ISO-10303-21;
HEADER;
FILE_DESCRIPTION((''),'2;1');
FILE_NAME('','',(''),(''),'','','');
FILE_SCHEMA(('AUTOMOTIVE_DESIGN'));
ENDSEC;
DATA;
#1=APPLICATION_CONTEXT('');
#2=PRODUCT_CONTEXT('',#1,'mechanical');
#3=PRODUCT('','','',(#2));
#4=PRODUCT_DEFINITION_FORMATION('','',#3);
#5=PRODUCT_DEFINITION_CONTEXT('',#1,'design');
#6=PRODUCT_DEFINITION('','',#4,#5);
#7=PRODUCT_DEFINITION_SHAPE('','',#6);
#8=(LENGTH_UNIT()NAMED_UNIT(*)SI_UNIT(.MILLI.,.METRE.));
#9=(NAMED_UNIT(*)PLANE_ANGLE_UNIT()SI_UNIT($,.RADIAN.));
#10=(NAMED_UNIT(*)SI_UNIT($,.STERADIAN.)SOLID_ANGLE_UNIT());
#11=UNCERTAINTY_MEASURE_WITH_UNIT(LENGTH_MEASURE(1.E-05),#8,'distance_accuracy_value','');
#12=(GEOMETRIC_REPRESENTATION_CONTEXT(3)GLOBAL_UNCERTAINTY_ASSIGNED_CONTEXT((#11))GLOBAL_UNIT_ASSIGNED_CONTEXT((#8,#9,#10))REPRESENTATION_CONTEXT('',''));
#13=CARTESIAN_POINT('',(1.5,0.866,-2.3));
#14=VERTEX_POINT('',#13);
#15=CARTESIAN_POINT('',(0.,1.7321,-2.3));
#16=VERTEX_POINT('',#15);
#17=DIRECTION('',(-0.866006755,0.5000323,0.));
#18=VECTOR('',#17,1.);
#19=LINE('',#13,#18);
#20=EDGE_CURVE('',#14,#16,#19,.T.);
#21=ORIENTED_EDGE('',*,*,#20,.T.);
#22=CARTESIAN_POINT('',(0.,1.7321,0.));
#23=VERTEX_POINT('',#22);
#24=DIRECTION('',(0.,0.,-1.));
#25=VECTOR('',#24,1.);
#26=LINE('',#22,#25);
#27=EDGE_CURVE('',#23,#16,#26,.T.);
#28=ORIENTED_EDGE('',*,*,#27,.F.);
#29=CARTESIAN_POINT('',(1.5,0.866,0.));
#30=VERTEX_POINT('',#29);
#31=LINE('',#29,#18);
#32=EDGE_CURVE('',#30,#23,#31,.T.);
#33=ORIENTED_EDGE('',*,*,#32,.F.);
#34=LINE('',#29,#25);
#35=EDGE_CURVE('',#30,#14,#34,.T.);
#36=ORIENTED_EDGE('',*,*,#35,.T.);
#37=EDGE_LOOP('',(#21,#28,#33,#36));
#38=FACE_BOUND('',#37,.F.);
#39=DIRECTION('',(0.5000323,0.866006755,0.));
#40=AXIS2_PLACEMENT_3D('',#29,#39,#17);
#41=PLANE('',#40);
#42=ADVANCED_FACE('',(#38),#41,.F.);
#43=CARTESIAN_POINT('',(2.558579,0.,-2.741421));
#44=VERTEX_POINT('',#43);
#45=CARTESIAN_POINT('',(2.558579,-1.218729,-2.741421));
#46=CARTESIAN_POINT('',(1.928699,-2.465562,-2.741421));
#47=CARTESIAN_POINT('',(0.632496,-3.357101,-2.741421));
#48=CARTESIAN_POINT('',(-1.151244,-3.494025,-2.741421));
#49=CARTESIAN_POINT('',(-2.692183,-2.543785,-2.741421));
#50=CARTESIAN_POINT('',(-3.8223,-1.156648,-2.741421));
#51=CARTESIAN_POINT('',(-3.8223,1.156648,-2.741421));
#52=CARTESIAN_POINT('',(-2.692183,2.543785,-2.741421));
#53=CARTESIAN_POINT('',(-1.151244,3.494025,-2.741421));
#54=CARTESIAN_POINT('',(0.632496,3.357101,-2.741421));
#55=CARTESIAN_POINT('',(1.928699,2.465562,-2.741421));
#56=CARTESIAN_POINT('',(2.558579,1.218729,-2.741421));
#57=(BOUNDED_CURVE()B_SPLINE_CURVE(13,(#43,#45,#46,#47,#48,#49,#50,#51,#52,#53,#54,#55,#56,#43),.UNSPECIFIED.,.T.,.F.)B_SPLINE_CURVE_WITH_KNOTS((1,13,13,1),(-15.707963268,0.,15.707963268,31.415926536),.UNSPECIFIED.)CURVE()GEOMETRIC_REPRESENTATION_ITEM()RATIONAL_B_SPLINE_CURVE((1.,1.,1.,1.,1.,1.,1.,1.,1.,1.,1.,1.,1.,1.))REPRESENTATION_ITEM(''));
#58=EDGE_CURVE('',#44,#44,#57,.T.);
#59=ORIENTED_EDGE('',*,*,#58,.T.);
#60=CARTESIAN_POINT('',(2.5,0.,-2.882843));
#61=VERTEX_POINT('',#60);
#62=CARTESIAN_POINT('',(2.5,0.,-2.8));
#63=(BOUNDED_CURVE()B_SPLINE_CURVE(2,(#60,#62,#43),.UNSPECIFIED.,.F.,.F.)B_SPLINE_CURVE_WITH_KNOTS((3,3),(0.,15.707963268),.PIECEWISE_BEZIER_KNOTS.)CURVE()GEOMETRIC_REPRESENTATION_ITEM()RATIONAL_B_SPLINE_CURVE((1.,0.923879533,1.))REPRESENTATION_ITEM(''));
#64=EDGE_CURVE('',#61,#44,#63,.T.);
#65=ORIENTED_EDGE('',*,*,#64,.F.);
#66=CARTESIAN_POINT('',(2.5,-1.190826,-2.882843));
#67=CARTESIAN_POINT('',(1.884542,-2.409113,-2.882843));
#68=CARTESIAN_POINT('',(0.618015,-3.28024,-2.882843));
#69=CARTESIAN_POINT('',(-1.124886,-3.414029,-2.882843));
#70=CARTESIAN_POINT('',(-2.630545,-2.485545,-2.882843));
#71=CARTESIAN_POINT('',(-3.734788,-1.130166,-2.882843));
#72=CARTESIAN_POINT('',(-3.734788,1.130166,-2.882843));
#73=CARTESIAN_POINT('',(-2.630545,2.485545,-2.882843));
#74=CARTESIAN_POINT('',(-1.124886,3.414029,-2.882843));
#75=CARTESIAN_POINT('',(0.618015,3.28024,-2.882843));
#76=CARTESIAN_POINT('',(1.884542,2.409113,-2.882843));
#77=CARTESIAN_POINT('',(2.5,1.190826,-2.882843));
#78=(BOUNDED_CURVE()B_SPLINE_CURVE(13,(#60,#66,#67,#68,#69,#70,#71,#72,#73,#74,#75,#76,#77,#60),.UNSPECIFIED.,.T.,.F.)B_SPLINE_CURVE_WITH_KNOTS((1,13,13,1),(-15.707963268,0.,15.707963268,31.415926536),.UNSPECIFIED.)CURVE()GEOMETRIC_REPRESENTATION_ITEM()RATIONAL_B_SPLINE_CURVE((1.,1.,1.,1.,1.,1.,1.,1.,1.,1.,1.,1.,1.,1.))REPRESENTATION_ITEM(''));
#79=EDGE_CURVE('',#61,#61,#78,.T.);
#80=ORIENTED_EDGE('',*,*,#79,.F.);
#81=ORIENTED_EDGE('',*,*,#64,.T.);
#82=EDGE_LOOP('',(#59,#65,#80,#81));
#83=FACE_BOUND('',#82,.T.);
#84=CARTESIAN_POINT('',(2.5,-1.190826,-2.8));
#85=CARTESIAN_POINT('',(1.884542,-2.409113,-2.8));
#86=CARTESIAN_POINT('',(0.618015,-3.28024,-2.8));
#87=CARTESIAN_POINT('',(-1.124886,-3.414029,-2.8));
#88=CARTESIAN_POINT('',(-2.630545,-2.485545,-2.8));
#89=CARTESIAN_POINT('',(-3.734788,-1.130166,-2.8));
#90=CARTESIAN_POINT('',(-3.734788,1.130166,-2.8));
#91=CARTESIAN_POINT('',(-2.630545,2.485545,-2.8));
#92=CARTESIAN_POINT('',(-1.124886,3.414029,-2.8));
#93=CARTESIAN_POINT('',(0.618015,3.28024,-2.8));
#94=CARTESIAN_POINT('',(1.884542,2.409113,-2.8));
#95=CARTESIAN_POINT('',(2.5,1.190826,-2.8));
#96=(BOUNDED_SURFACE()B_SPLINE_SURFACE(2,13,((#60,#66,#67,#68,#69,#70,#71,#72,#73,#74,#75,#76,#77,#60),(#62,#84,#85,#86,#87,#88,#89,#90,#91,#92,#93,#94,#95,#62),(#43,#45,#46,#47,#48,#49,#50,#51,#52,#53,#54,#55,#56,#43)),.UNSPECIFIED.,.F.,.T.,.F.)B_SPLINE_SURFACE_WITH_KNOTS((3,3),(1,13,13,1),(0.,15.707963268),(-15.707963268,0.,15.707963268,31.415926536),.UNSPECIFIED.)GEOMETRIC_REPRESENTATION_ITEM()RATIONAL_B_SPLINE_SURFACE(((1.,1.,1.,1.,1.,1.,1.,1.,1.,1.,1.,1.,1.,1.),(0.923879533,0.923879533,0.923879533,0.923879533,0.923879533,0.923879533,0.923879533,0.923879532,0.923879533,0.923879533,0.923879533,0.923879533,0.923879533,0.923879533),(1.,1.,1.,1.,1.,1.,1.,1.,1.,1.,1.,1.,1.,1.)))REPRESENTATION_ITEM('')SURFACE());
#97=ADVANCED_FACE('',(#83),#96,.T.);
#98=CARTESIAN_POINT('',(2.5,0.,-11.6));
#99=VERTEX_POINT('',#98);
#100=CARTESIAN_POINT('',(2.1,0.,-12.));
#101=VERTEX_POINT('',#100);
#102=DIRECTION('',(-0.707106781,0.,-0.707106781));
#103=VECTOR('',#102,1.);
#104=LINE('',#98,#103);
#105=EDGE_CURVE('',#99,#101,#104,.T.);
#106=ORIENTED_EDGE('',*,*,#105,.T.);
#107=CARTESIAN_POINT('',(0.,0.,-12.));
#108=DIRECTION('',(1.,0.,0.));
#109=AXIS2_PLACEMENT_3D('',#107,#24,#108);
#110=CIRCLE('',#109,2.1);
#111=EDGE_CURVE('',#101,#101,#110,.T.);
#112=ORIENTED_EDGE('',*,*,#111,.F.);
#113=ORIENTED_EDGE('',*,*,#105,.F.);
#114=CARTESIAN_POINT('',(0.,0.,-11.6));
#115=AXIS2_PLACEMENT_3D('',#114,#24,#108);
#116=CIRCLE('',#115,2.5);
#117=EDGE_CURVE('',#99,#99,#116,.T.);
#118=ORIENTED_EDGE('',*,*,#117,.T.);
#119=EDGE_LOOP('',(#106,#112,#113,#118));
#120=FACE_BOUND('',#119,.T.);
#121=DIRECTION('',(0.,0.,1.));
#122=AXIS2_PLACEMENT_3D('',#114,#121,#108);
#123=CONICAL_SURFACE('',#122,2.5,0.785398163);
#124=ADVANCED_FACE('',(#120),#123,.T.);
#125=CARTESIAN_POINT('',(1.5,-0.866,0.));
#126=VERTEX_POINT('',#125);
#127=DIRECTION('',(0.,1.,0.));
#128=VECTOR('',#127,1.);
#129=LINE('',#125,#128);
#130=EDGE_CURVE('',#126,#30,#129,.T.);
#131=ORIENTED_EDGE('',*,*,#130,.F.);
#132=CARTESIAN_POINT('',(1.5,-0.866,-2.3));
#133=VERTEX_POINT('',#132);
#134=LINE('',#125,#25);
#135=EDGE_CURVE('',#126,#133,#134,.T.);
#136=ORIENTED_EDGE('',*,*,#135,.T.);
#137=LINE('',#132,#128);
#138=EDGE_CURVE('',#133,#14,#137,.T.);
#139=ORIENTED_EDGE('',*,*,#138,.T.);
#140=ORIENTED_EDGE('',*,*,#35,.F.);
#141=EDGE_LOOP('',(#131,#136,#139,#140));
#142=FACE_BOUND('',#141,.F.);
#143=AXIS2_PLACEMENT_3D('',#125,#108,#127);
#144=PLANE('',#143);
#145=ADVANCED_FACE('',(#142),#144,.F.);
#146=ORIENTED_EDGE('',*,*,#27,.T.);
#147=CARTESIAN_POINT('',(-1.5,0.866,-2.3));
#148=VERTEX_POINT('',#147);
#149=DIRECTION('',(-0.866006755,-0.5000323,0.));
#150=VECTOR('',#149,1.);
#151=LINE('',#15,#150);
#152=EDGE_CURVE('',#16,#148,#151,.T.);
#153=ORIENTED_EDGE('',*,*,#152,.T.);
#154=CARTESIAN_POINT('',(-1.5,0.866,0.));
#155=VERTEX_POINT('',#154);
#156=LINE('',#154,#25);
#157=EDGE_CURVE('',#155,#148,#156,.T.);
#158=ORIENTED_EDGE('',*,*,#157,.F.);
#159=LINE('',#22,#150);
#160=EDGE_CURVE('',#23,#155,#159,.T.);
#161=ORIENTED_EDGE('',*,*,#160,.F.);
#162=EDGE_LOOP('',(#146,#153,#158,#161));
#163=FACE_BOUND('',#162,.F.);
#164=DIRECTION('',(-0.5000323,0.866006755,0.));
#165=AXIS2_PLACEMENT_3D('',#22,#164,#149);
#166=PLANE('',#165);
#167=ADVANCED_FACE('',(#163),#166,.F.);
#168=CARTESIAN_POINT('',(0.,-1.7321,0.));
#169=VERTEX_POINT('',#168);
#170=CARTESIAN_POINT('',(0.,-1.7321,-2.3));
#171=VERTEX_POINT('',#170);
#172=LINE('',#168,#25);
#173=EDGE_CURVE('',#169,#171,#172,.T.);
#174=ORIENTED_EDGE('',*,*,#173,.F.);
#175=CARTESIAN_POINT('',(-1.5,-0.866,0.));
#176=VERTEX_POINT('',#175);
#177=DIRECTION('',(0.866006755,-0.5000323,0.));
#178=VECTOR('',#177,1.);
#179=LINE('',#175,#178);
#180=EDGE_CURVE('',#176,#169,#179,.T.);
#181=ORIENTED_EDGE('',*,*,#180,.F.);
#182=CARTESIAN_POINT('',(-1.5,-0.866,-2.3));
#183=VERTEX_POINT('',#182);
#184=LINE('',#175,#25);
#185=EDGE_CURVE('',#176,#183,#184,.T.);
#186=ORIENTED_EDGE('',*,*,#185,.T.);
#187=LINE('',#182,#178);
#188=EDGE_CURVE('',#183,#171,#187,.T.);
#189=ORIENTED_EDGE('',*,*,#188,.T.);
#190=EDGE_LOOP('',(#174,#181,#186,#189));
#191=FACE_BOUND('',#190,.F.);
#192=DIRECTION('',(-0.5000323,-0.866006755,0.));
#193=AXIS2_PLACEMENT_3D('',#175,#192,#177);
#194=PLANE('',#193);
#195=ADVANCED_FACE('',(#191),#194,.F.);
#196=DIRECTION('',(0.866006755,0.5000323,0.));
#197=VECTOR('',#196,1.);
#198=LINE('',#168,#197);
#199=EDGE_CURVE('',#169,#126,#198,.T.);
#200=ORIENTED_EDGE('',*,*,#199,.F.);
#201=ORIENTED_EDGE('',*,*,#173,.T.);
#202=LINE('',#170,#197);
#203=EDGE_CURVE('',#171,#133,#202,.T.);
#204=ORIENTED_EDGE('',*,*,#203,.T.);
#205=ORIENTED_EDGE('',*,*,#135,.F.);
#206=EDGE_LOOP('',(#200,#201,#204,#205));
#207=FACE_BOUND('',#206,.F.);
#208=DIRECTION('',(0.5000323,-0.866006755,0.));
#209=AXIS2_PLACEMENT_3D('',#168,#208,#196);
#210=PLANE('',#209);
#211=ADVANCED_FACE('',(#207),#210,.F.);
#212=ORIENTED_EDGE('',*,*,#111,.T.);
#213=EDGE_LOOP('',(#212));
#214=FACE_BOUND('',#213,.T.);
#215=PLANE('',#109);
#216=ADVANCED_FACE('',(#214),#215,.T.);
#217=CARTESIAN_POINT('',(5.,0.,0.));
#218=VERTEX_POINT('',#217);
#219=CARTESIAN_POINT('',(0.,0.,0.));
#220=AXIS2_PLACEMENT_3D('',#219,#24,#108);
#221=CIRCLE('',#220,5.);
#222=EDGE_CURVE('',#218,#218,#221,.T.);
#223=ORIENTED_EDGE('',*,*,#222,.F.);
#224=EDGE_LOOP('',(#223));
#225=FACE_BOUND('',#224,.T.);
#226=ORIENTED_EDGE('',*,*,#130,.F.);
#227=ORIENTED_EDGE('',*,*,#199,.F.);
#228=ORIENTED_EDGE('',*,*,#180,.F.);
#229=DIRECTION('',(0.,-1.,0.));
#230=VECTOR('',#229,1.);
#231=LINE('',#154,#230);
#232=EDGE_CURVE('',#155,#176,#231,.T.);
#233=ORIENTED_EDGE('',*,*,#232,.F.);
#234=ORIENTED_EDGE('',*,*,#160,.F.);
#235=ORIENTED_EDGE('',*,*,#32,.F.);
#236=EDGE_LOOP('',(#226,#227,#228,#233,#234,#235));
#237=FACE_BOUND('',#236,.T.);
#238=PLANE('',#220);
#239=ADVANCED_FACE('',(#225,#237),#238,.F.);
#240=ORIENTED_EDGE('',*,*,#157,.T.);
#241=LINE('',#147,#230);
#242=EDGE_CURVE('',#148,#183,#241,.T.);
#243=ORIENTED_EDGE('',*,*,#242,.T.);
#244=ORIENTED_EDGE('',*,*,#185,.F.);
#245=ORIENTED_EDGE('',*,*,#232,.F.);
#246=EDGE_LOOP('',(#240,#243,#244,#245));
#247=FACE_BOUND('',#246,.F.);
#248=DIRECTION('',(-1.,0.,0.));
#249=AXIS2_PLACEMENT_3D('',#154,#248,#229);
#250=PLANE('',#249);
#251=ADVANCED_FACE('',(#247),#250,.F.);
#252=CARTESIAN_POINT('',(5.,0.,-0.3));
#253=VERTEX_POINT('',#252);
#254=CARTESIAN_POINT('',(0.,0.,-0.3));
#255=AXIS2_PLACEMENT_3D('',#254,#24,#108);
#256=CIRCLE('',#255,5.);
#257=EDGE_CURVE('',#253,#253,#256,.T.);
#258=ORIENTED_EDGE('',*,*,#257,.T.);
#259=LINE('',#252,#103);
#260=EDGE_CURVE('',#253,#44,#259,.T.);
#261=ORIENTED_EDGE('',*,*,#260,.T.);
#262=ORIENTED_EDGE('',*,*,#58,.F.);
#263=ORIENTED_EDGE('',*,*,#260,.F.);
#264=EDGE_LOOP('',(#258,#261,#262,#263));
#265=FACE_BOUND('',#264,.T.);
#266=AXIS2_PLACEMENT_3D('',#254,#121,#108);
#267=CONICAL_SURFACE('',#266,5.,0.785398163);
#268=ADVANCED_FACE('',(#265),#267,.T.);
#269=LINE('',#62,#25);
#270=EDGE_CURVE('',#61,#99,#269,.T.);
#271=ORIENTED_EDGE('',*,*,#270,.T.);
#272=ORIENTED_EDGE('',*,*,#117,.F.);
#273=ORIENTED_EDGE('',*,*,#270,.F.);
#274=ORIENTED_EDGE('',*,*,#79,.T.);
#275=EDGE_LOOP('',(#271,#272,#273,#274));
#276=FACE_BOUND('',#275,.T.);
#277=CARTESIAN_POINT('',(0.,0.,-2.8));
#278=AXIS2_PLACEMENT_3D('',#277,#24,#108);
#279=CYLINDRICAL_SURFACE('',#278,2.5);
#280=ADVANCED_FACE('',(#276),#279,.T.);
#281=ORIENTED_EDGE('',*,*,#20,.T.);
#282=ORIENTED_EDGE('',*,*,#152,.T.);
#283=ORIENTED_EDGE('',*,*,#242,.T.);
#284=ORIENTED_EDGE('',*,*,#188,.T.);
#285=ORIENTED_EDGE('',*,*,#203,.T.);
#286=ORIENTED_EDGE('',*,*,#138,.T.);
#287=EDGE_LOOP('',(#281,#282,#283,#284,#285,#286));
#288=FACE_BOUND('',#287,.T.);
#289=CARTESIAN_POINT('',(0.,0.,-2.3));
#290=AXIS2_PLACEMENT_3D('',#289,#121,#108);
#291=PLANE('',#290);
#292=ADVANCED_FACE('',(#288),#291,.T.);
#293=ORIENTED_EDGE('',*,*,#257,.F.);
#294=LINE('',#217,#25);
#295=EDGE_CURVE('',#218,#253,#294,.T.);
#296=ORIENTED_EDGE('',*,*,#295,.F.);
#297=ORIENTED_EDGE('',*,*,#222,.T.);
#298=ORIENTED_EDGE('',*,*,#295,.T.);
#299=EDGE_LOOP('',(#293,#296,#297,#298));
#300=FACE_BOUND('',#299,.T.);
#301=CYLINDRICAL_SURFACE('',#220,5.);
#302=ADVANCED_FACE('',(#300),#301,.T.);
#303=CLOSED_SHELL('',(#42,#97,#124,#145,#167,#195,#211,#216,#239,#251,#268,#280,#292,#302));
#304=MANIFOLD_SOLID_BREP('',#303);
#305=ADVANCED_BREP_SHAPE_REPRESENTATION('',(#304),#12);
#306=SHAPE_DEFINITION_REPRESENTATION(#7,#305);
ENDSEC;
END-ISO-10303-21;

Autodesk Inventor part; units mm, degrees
ref_plane "YZ Plane" through (0, 0, 0) normal (1, 0, 0) x (0, 1, 0)
sketch "草圖1" plane through (0, 0, 0) normal (0, 1, 0) x (-1, 0, 0)
  point P0 (0, 0)
sketch "草圖2" plane through (0, 0, 0) normal (0, 1, 0) x (-1, 0, 0)
  line L0 (-2.5, -12) -> (0, -12)
  line L1 (-2.5, -2.8) -> (-2.5, -12)
  line L2 (-5, -0.3) -> (-2.5, -2.8)
  line L3 (-5, 0) -> (-5, -0.3)
  line L4 (0, 0) -> (-5, 0)
  line L5 (0, -12) -> (0, 0)
  line L6 (0, -12) -> (0, 0)
  line L7 (0, -14.4) -> (0, 2.4) projected
  line L8 (1, 0) -> (-6, 0) projected
  dimension "d3" = 5
  dimension "d5" = 2.5
  dimension "d7" = 12
  dimension "ParC" = 0.3
  dimension "d22" = 0
  dimension "d23" = 0
  dimension "d43" = 45
revolve "迴轉1" add sketch "草圖2" angle 360 about axis through (0, 0, -12) along (0, 0, -1)
sketch "草圖3" plane through (0, 0, 0) normal (0, 0, 1) x (1, 0, 0)
  line L0 (-1.5, 0.866) -> (-1.5, -0.866)
  line L1 (0, 1.7321) -> (-1.5, 0.866)
  line L2 (1.5, 0.866) -> (0, 1.7321)
  line L3 (1.5, -0.866) -> (1.5, 0.866)
  line L4 (0, -1.7321) -> (1.5, -0.866)
  line L5 (-1.5, -0.866) -> (0, -1.7321)
  circle A0 centre (0, 0) radius 1.5 construction
  circle A1 centre (0, 0) radius 2.5 construction
  dimension "d11" = 3
  dimension "d13" = 120
  dimension "d15" = 120
extrude "擠出1" cut sketch "草圖3" against normal blind 2.3
fillet "圓角1" radius 0.2 1 edges at (-2.5, 0, -2.8)
chamfer "倒角1" distance 0.4 angle 45 1 edges at (-2.5, 0, -12) measured on face at (-0.599, -2.4272, -8.9609)
thread "螺紋1" size "M5x0.8" class "6g" standard "ISO Metric profile" length 7.6
ref_plane "MSC_PF1" through (0, 0, 0) normal (1, 0, 0) x (0, 1, 0)
ref_plane "MSC_PT1" through (0, 0, 0) normal (0, 0, -1) x (-1, 0, 0)
equation "\"d3\" = 0.5 * dk"
equation "\"d5\" = 0.5 * NND"
equation "\"d7\" = NLG"
equation "\"d43\" = 0.5 * ang"
equation "\"d11\" = ParS"
equation "\"d16\" = ParT"
equation "\"d18\" = r"
equation "\"d19\" = 0.5 * PTC"
equation "\"d39\" = 0.5 * PTC"
equation "\"NND\" = 5"
equation "\"PTC\" = 0.8"
equation "\"ParK\" = 2.8"
equation "\"ParS\" = 3"
equation "\"ParT\" = 2.3"
equation "\"r\" = 0.2"
equation "\"NLG\" = 12"
equation "\"ang\" = 90deg"
equation "\"THREADDIA\" = NND"
equation "\"dk\" = 10"
properties part number "DIN 7991 - M5x12" material "鋼、軟鋼"
